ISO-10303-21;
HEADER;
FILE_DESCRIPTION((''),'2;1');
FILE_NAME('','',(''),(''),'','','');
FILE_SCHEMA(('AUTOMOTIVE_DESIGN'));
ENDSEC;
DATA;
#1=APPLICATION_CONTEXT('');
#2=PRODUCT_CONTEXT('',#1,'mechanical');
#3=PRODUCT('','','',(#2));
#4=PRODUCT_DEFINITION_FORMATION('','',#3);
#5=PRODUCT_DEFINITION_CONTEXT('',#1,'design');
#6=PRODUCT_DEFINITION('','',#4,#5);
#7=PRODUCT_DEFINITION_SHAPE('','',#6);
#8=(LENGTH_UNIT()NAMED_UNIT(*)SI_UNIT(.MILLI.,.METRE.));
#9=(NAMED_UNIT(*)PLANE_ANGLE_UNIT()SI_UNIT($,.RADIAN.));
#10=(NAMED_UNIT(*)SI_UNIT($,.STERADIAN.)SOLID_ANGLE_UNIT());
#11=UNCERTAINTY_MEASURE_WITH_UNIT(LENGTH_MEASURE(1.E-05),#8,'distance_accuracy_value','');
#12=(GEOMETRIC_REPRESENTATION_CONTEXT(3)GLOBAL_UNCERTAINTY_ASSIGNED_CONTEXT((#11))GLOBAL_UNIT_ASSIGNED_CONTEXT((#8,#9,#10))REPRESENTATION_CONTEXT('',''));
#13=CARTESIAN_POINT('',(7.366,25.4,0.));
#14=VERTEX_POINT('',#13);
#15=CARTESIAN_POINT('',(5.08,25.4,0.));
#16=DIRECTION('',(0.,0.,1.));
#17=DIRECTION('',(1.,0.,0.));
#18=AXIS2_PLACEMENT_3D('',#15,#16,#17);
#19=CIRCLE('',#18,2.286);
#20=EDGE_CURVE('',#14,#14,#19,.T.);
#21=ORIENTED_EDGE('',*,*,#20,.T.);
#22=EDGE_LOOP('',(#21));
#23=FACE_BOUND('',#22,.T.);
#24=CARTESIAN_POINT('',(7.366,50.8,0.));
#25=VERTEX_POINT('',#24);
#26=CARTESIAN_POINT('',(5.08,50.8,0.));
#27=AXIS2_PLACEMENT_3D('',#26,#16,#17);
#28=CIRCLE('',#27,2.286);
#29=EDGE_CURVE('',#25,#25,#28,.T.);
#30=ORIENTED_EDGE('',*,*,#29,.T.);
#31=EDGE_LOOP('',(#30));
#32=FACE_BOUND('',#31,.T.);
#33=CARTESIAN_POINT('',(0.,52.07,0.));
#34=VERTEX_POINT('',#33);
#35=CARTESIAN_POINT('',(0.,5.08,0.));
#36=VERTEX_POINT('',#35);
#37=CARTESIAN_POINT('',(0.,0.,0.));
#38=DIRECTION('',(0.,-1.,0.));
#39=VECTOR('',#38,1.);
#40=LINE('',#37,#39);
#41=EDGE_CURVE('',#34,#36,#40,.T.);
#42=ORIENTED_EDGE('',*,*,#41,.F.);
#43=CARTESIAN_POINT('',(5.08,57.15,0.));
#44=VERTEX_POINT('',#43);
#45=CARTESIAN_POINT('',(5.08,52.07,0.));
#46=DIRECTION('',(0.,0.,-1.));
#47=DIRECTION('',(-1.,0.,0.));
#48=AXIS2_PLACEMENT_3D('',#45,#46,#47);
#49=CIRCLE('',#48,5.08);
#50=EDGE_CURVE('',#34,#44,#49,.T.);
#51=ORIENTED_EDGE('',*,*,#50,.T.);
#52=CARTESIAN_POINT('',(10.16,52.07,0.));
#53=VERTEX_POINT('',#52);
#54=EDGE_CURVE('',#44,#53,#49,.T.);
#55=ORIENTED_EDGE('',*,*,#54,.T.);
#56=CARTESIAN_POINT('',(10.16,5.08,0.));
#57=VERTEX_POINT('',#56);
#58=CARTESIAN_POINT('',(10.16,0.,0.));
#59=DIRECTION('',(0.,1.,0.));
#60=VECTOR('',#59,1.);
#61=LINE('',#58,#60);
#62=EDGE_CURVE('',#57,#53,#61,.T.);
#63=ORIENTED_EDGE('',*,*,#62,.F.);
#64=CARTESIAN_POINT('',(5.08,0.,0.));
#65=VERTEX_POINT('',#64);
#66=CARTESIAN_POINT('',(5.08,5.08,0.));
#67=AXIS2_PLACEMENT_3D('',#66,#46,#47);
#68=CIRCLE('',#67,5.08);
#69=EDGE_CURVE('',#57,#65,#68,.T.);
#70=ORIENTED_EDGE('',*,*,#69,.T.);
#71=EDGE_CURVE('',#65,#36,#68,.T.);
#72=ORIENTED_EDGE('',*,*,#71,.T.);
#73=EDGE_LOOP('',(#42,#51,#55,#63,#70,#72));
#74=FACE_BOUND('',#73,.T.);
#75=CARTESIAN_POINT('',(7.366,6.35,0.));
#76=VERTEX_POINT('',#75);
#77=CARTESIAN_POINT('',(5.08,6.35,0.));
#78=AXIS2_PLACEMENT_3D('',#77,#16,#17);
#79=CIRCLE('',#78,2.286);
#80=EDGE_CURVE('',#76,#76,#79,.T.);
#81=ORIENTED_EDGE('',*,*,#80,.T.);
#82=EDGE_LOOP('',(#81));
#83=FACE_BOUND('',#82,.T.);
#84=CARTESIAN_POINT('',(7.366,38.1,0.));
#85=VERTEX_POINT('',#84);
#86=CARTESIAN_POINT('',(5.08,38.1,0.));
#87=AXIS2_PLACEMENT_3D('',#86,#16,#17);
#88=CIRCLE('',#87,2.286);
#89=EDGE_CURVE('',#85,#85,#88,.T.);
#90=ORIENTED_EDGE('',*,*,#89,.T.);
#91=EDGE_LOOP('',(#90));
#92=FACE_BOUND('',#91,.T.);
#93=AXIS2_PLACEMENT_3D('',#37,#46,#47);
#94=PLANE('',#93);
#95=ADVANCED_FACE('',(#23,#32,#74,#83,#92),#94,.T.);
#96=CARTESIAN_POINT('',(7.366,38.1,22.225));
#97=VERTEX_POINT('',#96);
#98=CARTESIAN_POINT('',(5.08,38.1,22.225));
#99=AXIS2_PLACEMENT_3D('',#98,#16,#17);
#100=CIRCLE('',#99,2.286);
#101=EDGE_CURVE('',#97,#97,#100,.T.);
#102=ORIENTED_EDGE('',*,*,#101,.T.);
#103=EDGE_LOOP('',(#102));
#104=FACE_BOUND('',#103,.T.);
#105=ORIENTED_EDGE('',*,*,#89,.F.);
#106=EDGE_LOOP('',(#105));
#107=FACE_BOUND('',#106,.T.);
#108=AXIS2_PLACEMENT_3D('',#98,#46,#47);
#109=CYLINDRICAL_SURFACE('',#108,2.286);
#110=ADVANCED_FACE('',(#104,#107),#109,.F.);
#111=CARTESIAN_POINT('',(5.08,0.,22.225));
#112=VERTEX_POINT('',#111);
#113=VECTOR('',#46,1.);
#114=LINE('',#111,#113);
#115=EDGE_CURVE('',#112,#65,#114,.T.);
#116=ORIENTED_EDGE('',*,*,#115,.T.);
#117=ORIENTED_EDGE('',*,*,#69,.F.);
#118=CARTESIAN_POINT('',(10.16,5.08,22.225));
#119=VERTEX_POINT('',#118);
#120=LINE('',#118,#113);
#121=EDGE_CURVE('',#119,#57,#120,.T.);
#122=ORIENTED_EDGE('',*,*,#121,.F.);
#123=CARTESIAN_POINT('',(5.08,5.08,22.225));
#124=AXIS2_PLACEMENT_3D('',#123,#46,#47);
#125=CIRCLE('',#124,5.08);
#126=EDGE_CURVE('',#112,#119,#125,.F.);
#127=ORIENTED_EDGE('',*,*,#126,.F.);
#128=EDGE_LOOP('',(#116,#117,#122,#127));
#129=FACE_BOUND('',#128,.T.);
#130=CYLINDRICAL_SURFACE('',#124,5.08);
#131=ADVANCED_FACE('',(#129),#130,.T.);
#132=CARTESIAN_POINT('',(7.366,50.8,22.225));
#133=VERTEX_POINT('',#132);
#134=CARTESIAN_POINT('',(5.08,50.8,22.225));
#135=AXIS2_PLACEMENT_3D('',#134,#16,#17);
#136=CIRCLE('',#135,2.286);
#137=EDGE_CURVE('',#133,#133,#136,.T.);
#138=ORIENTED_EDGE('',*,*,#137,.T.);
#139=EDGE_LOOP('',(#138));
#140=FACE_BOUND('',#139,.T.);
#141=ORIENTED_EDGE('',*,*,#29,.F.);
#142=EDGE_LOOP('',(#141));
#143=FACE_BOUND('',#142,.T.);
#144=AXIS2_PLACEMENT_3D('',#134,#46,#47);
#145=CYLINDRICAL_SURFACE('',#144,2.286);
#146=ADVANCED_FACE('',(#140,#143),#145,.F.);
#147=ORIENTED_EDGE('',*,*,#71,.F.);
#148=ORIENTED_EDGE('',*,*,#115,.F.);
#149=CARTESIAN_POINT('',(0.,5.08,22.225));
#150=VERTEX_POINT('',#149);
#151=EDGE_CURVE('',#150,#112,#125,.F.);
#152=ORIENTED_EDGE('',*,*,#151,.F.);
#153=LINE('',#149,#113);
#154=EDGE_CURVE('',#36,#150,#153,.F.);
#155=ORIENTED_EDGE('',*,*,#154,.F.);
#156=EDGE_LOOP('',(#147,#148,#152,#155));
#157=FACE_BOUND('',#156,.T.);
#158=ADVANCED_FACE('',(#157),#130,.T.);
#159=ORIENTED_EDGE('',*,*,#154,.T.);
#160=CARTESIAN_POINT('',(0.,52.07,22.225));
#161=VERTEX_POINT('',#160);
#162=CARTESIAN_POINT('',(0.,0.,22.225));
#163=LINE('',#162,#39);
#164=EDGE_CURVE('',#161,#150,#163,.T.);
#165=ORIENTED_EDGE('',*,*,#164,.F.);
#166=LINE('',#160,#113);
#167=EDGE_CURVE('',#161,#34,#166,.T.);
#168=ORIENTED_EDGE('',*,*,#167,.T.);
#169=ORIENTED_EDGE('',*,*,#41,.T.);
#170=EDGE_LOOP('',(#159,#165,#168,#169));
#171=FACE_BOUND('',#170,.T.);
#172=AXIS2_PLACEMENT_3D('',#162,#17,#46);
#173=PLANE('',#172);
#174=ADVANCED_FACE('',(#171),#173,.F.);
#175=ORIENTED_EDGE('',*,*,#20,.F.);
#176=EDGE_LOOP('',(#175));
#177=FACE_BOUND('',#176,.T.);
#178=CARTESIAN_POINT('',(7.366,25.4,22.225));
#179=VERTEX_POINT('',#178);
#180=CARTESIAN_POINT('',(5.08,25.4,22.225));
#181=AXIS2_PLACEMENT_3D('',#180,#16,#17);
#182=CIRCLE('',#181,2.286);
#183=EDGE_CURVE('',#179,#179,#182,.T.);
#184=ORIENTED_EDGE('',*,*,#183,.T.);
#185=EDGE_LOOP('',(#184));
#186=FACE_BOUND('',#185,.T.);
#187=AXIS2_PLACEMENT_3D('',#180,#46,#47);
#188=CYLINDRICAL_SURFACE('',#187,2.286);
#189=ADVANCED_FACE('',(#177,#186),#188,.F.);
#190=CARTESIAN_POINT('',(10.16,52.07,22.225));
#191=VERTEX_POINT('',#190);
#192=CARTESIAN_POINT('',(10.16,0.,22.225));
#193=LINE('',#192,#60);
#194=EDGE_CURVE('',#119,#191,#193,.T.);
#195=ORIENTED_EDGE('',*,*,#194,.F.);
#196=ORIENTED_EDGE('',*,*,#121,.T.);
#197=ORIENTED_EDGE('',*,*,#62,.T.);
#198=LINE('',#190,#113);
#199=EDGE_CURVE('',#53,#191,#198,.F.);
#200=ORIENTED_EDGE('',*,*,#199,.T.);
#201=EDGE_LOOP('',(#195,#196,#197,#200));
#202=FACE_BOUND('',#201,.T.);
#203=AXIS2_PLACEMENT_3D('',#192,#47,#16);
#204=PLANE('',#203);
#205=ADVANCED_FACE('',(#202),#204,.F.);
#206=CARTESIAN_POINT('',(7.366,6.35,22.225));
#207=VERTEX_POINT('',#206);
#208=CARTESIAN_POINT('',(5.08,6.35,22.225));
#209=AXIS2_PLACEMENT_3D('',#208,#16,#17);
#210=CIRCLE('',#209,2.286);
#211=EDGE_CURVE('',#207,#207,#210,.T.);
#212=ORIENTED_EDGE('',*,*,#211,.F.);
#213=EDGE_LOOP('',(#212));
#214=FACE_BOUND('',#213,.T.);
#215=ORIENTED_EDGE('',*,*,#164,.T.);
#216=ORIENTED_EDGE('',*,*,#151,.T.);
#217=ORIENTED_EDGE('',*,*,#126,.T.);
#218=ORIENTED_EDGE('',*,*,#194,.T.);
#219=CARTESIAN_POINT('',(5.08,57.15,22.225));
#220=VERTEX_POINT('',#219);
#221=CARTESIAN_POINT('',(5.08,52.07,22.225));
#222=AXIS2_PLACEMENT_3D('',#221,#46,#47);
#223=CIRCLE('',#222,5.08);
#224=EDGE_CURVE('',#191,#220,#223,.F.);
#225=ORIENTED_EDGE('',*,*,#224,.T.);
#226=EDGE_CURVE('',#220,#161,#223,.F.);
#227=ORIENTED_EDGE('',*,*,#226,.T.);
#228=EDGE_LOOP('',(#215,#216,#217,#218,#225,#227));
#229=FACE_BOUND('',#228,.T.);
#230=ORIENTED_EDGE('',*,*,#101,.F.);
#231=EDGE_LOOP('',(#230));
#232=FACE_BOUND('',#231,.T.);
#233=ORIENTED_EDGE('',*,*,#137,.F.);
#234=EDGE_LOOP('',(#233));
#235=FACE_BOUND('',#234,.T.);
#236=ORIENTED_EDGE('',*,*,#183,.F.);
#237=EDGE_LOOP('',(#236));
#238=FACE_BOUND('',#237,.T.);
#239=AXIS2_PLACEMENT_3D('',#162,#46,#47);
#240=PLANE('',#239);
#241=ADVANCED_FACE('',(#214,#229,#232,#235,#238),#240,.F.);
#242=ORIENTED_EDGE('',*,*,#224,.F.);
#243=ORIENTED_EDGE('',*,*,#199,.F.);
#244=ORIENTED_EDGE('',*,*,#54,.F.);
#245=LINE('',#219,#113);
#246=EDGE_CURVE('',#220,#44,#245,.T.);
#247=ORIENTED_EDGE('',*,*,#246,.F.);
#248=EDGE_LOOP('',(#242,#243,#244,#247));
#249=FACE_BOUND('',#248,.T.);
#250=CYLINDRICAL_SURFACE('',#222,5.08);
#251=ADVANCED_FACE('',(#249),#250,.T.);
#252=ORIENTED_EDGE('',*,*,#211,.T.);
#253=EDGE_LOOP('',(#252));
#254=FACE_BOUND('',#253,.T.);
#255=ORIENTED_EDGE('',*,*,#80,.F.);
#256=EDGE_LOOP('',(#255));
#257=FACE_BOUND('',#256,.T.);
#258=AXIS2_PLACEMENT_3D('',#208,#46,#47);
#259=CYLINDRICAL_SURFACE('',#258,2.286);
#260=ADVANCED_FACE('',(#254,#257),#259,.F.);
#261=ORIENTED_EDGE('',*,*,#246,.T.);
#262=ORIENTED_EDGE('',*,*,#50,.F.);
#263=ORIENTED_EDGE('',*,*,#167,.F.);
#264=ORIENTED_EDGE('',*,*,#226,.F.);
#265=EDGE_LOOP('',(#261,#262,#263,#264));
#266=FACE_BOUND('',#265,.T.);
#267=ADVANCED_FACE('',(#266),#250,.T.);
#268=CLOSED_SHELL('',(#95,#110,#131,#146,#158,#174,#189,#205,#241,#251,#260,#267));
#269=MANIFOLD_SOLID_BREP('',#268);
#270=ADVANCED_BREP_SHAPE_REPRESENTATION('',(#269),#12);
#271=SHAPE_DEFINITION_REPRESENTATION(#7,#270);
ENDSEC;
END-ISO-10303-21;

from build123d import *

# Parameters (mm, degrees)
SKETCH1_W           = 10.16
SKETCH1_H           = 57.15
SKETCH1_R           = 2.286
BOSS_EXTRUDE1_DEPTH = 22.225
FILLET1_R           = 5.08


with BuildPart() as part:
    # Sketch1 → Boss-Extrude1 (new body)
    with BuildSketch(Plane.XY):
        with Locations((5.08, 28.575)):
            Rectangle(SKETCH1_W, SKETCH1_H)
        with Locations((5.08, 6.35)):
            Circle(SKETCH1_R, mode=Mode.SUBTRACT)
        with Locations((5.08, 25.4)):
            Circle(SKETCH1_R, mode=Mode.SUBTRACT)
        with Locations((5.08, 38.1)):
            Circle(SKETCH1_R, mode=Mode.SUBTRACT)
        with Locations((5.08, 50.8)):
            Circle(SKETCH1_R, mode=Mode.SUBTRACT)
    extrude(amount=BOSS_EXTRUDE1_DEPTH)

    # Fillet1
    fillet1_edges = [part.edges().sort_by_distance(p)[0] for p in [
        (10.16, 0, 11.1125),
        (0, 0, 11.1125),
        (0, 57.15, 11.1125),
        (10.16, 57.15, 11.1125),
    ]]
    fillet(fillet1_edges, radius=FILLET1_R - 0.0001)  # a hair under: the kernel refuses the full size


solid = part.part
